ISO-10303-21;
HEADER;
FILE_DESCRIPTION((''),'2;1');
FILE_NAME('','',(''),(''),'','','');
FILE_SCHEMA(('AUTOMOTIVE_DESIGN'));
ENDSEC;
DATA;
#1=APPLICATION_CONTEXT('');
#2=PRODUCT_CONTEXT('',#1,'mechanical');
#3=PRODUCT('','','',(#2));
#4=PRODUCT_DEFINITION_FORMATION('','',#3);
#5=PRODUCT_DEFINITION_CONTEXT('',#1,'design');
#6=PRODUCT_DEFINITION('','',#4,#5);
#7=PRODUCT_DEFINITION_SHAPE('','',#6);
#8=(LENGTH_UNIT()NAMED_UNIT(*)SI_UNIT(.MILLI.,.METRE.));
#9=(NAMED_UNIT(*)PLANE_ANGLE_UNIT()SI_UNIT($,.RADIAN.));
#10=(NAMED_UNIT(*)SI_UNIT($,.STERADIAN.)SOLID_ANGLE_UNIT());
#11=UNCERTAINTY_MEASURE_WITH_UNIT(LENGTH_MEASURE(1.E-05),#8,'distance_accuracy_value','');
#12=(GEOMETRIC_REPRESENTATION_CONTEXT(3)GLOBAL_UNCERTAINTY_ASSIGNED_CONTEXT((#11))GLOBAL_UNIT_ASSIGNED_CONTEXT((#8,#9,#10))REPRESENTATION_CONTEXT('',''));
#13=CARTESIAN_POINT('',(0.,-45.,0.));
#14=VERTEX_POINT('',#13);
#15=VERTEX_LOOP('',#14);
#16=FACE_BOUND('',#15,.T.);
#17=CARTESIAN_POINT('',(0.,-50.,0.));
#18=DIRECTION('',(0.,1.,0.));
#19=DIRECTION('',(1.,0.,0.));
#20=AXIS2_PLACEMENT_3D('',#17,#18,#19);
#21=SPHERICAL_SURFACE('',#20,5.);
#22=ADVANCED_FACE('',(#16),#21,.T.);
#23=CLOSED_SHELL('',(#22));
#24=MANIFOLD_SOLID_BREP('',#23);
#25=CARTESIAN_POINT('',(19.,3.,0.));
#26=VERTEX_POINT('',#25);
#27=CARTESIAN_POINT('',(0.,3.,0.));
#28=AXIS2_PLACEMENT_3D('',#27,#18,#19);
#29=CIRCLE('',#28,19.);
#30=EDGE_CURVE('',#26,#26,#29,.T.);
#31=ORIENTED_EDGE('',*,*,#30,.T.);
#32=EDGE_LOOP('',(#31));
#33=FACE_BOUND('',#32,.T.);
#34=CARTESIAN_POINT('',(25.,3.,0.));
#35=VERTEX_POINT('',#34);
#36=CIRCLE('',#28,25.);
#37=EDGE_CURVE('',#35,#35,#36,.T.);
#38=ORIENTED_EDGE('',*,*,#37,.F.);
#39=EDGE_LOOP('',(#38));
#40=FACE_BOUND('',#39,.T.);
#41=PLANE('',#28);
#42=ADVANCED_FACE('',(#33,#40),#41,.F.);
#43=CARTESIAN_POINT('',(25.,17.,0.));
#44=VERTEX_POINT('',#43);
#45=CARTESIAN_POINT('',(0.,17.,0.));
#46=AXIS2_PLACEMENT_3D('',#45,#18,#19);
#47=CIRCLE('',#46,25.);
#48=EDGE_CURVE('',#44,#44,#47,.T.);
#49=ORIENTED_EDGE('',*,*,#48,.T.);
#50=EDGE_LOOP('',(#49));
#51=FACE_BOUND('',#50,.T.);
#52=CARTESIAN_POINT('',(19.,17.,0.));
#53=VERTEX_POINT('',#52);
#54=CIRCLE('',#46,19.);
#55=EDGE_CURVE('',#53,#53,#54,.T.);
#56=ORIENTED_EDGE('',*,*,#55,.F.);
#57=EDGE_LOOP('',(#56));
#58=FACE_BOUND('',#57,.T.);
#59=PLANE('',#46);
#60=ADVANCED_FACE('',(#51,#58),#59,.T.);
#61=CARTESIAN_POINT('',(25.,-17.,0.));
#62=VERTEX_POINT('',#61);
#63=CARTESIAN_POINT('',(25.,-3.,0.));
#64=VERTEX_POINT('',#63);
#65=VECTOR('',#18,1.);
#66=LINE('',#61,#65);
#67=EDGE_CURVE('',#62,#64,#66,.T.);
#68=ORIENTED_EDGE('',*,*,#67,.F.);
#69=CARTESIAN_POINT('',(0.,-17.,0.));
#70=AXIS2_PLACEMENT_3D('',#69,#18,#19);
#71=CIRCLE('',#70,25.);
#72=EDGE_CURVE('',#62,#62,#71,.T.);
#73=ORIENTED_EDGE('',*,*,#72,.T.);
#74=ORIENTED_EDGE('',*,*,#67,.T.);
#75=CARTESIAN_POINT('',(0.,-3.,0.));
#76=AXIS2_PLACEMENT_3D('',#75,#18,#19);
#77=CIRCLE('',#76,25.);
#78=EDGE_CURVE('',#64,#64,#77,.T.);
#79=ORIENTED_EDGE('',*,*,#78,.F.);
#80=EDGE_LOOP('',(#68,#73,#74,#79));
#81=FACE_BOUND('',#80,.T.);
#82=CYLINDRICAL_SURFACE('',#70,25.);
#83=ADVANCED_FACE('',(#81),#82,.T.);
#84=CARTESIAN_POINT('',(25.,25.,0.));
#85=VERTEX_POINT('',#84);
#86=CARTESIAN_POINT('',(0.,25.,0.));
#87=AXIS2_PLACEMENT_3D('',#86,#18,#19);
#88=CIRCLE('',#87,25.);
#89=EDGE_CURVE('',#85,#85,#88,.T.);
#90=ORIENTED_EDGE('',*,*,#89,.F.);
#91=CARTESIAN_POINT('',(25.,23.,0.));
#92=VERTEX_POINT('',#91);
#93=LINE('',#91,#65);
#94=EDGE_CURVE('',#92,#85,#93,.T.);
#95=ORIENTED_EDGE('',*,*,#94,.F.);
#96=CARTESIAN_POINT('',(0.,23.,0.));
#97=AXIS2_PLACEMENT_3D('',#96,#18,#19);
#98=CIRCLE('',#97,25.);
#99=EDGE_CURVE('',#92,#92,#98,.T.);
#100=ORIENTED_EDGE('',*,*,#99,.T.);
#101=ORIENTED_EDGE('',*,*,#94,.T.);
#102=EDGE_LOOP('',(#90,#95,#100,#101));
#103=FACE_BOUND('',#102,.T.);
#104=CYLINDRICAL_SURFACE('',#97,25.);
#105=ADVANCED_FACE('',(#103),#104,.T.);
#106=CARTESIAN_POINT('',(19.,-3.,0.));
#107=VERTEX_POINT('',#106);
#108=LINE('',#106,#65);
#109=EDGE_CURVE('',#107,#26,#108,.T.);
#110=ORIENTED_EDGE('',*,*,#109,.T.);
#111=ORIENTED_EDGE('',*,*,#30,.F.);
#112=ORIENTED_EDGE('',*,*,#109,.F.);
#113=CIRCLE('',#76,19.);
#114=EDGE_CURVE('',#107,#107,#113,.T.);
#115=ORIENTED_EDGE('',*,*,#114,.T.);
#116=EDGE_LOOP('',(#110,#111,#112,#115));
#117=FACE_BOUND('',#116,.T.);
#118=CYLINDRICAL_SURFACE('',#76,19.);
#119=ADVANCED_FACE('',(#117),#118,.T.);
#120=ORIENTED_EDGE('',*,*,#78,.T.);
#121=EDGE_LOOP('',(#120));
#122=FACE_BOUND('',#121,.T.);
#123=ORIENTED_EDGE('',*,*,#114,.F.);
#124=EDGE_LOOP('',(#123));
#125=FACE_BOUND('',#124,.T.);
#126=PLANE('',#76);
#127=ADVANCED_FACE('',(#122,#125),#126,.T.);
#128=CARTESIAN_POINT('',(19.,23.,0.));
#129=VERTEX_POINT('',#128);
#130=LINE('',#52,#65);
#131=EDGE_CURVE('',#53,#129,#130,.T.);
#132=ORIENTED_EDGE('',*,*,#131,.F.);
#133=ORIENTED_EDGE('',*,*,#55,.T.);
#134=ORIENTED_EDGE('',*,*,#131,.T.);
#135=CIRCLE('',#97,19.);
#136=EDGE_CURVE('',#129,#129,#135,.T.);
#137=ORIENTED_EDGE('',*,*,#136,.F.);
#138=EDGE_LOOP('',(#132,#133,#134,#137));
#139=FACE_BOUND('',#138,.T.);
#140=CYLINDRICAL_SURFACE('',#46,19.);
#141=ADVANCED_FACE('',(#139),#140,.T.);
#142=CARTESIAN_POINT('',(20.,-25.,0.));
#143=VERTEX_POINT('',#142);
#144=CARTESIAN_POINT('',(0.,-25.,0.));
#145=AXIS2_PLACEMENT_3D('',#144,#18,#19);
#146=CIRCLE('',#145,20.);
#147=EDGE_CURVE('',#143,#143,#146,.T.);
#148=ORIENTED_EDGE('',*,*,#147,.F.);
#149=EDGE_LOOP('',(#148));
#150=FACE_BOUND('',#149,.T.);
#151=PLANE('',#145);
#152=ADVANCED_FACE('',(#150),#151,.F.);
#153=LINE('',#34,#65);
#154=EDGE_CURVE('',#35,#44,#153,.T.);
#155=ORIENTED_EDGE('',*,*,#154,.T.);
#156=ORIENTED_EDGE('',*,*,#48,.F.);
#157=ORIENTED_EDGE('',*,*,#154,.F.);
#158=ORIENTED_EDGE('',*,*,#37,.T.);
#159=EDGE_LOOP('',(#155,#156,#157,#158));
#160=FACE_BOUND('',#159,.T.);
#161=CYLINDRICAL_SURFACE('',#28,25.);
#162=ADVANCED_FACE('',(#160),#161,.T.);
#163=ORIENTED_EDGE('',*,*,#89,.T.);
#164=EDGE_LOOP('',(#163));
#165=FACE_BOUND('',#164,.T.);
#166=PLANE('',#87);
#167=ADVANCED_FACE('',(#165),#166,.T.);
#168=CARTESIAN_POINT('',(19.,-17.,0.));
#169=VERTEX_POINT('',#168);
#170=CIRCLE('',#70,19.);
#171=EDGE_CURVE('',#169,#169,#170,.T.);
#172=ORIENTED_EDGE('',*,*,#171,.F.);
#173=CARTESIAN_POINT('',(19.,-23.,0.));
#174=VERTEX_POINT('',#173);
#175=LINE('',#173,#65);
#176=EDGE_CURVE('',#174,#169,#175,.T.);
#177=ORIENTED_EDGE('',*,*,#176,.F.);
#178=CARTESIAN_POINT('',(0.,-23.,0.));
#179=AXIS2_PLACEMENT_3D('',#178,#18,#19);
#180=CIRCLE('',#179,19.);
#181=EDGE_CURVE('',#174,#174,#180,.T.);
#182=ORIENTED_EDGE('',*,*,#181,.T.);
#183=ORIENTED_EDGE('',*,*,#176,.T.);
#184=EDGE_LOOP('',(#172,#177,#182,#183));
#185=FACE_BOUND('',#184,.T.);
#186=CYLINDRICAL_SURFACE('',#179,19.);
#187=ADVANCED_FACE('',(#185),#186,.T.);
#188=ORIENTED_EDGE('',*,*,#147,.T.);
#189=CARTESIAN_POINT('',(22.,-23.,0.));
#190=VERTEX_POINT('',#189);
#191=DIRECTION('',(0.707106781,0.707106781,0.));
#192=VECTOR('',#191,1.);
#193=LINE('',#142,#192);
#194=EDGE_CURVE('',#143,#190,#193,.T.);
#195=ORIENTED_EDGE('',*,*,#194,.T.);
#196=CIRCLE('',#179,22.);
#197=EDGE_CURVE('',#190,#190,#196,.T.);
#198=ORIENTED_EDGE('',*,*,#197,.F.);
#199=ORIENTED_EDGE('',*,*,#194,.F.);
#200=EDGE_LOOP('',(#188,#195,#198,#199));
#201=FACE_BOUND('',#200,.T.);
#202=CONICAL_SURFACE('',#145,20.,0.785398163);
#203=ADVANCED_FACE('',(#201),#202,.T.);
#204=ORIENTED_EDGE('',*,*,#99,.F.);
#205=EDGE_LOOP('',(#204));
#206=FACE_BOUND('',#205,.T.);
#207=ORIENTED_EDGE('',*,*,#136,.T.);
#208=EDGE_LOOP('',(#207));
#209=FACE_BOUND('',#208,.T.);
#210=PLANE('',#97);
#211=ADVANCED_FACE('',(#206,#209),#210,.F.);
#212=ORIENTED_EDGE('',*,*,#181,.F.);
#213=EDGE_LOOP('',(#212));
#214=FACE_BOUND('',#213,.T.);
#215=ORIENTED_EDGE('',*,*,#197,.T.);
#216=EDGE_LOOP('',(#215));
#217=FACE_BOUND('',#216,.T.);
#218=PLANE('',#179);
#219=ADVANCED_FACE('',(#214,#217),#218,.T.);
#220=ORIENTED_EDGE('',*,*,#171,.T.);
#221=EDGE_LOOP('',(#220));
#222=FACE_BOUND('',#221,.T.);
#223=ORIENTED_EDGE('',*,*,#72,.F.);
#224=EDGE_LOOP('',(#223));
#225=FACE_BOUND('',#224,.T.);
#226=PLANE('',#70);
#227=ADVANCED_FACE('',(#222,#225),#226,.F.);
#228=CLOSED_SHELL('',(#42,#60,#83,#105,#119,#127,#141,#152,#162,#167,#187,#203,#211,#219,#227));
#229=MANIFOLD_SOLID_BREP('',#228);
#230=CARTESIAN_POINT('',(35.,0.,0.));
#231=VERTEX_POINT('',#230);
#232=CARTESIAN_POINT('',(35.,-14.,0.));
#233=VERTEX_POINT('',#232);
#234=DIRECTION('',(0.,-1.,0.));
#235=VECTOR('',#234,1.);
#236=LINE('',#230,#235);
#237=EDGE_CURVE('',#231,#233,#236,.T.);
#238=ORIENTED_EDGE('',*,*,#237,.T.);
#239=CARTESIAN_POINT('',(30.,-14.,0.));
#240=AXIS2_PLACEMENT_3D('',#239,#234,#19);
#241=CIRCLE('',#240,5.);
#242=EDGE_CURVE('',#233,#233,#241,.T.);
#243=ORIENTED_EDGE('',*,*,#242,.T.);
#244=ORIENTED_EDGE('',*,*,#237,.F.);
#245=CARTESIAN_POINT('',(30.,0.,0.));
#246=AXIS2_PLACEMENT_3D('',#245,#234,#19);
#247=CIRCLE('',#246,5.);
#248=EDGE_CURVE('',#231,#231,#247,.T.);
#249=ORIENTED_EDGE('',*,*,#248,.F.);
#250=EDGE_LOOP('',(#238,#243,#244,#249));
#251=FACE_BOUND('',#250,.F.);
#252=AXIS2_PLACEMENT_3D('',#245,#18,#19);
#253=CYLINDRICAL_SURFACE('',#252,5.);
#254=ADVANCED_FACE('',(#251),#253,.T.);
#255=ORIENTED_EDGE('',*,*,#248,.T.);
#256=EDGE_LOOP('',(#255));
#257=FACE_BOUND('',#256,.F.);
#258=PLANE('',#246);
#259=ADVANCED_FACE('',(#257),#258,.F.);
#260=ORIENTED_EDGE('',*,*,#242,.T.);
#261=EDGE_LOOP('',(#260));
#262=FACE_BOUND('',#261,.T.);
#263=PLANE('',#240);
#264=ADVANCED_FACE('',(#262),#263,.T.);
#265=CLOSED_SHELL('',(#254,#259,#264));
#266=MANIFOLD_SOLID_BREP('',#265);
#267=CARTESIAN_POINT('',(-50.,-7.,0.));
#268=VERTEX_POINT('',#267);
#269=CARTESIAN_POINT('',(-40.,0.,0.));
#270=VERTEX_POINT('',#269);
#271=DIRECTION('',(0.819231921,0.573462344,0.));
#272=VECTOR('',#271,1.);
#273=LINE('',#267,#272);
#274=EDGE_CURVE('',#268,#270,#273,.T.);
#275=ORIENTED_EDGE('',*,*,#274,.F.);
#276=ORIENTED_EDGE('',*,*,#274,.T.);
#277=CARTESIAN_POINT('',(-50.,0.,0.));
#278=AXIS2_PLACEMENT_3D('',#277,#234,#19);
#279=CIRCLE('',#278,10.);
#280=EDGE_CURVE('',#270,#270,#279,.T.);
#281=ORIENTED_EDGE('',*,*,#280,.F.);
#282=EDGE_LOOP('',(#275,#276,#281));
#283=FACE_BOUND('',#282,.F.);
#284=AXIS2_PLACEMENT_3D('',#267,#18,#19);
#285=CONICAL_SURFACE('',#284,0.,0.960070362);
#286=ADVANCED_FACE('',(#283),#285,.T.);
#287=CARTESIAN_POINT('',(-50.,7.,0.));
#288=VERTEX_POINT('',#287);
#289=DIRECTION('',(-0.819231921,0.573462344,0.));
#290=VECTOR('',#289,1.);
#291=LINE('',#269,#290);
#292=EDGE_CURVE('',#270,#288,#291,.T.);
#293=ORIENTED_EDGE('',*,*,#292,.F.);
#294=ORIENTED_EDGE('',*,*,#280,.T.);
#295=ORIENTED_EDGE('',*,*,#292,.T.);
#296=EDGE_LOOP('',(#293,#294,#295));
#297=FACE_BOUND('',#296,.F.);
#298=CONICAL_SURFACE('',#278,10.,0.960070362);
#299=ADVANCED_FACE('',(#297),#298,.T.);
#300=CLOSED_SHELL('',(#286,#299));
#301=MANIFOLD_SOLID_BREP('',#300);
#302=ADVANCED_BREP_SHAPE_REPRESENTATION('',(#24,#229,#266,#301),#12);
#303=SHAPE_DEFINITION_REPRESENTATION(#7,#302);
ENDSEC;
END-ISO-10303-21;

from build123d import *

# Parameters (mm, degrees)
F0_R     = 25
F1_DEPTH = 25
F5_R     = 5
F6_DEPTH = 14


# Not quite as in the source:
# - a fillet or chamfer that OpenCascade refuses, or shapes differently, is made with other operations: its cross-section is extruded or revolved along the edge and cut away or added


with BuildPart() as f1:
    # F0 (on Front) → F1 (new body, symmetric)
    with BuildSketch(Plane.XZ):
        Circle(F0_R)
    extrude(amount=F1_DEPTH, both=True)


with BuildPart() as f3:
    # F2 (on Top) → F3 (revolve)
    with BuildSketch(Plane.XY):
        Polygon((0, 25), (0, -25), (25, -25), (25, -23), (19, -23), (19, -17), (25, -17), (25, -3), (19, -3), (19, 3), (25, 3), (25, 17), (19, 17), (19, 23), (25, 23), (25, 25), align=None)
    revolve(axis=Axis((0, 0, 0), (0, 1, 0)))

    # F9: chamfer of 5 on 1 edges, made by hand

    # F9_s1 → F9_t2 (revolve, cut)
    with BuildSketch(Plane.XY):
        Polygon((20, -25), (25, -20), (25, -25), align=None)
    revolve(axis=Axis((0, -25, 0), (0, 1, 0)), mode=Mode.SUBTRACT)


with BuildPart() as f6:
    # F5 (on Front) → F6 (new body)
    with BuildSketch(Plane.XZ):
        with Locations((30, 0)):
            Circle(F5_R)
    extrude(amount=F6_DEPTH)


with BuildPart() as f8:
    # F7 (on Top) → F8 (revolve)
    with BuildSketch(Plane.XY):
        with BuildLine():
            ThreePointArc((0, -55), (5, -50), (0, -45))
            Line((0, -45), (0, -55))
        make_face()
    revolve(axis=Axis((0, -50, 0), (0, 1, 0)))


with BuildPart() as f11:
    # F10 (on Top) → F11 (revolve)
    with BuildSketch(Plane.XY):
        Polygon((-50, 7), (-50, 0), (-50, -7), (-40, 0), align=None)
    revolve(axis=Axis((-50, -3.5, 0), (0, -1, 0)))


solid = Compound([f3.part, f6.part, f8.part, f11.part])
